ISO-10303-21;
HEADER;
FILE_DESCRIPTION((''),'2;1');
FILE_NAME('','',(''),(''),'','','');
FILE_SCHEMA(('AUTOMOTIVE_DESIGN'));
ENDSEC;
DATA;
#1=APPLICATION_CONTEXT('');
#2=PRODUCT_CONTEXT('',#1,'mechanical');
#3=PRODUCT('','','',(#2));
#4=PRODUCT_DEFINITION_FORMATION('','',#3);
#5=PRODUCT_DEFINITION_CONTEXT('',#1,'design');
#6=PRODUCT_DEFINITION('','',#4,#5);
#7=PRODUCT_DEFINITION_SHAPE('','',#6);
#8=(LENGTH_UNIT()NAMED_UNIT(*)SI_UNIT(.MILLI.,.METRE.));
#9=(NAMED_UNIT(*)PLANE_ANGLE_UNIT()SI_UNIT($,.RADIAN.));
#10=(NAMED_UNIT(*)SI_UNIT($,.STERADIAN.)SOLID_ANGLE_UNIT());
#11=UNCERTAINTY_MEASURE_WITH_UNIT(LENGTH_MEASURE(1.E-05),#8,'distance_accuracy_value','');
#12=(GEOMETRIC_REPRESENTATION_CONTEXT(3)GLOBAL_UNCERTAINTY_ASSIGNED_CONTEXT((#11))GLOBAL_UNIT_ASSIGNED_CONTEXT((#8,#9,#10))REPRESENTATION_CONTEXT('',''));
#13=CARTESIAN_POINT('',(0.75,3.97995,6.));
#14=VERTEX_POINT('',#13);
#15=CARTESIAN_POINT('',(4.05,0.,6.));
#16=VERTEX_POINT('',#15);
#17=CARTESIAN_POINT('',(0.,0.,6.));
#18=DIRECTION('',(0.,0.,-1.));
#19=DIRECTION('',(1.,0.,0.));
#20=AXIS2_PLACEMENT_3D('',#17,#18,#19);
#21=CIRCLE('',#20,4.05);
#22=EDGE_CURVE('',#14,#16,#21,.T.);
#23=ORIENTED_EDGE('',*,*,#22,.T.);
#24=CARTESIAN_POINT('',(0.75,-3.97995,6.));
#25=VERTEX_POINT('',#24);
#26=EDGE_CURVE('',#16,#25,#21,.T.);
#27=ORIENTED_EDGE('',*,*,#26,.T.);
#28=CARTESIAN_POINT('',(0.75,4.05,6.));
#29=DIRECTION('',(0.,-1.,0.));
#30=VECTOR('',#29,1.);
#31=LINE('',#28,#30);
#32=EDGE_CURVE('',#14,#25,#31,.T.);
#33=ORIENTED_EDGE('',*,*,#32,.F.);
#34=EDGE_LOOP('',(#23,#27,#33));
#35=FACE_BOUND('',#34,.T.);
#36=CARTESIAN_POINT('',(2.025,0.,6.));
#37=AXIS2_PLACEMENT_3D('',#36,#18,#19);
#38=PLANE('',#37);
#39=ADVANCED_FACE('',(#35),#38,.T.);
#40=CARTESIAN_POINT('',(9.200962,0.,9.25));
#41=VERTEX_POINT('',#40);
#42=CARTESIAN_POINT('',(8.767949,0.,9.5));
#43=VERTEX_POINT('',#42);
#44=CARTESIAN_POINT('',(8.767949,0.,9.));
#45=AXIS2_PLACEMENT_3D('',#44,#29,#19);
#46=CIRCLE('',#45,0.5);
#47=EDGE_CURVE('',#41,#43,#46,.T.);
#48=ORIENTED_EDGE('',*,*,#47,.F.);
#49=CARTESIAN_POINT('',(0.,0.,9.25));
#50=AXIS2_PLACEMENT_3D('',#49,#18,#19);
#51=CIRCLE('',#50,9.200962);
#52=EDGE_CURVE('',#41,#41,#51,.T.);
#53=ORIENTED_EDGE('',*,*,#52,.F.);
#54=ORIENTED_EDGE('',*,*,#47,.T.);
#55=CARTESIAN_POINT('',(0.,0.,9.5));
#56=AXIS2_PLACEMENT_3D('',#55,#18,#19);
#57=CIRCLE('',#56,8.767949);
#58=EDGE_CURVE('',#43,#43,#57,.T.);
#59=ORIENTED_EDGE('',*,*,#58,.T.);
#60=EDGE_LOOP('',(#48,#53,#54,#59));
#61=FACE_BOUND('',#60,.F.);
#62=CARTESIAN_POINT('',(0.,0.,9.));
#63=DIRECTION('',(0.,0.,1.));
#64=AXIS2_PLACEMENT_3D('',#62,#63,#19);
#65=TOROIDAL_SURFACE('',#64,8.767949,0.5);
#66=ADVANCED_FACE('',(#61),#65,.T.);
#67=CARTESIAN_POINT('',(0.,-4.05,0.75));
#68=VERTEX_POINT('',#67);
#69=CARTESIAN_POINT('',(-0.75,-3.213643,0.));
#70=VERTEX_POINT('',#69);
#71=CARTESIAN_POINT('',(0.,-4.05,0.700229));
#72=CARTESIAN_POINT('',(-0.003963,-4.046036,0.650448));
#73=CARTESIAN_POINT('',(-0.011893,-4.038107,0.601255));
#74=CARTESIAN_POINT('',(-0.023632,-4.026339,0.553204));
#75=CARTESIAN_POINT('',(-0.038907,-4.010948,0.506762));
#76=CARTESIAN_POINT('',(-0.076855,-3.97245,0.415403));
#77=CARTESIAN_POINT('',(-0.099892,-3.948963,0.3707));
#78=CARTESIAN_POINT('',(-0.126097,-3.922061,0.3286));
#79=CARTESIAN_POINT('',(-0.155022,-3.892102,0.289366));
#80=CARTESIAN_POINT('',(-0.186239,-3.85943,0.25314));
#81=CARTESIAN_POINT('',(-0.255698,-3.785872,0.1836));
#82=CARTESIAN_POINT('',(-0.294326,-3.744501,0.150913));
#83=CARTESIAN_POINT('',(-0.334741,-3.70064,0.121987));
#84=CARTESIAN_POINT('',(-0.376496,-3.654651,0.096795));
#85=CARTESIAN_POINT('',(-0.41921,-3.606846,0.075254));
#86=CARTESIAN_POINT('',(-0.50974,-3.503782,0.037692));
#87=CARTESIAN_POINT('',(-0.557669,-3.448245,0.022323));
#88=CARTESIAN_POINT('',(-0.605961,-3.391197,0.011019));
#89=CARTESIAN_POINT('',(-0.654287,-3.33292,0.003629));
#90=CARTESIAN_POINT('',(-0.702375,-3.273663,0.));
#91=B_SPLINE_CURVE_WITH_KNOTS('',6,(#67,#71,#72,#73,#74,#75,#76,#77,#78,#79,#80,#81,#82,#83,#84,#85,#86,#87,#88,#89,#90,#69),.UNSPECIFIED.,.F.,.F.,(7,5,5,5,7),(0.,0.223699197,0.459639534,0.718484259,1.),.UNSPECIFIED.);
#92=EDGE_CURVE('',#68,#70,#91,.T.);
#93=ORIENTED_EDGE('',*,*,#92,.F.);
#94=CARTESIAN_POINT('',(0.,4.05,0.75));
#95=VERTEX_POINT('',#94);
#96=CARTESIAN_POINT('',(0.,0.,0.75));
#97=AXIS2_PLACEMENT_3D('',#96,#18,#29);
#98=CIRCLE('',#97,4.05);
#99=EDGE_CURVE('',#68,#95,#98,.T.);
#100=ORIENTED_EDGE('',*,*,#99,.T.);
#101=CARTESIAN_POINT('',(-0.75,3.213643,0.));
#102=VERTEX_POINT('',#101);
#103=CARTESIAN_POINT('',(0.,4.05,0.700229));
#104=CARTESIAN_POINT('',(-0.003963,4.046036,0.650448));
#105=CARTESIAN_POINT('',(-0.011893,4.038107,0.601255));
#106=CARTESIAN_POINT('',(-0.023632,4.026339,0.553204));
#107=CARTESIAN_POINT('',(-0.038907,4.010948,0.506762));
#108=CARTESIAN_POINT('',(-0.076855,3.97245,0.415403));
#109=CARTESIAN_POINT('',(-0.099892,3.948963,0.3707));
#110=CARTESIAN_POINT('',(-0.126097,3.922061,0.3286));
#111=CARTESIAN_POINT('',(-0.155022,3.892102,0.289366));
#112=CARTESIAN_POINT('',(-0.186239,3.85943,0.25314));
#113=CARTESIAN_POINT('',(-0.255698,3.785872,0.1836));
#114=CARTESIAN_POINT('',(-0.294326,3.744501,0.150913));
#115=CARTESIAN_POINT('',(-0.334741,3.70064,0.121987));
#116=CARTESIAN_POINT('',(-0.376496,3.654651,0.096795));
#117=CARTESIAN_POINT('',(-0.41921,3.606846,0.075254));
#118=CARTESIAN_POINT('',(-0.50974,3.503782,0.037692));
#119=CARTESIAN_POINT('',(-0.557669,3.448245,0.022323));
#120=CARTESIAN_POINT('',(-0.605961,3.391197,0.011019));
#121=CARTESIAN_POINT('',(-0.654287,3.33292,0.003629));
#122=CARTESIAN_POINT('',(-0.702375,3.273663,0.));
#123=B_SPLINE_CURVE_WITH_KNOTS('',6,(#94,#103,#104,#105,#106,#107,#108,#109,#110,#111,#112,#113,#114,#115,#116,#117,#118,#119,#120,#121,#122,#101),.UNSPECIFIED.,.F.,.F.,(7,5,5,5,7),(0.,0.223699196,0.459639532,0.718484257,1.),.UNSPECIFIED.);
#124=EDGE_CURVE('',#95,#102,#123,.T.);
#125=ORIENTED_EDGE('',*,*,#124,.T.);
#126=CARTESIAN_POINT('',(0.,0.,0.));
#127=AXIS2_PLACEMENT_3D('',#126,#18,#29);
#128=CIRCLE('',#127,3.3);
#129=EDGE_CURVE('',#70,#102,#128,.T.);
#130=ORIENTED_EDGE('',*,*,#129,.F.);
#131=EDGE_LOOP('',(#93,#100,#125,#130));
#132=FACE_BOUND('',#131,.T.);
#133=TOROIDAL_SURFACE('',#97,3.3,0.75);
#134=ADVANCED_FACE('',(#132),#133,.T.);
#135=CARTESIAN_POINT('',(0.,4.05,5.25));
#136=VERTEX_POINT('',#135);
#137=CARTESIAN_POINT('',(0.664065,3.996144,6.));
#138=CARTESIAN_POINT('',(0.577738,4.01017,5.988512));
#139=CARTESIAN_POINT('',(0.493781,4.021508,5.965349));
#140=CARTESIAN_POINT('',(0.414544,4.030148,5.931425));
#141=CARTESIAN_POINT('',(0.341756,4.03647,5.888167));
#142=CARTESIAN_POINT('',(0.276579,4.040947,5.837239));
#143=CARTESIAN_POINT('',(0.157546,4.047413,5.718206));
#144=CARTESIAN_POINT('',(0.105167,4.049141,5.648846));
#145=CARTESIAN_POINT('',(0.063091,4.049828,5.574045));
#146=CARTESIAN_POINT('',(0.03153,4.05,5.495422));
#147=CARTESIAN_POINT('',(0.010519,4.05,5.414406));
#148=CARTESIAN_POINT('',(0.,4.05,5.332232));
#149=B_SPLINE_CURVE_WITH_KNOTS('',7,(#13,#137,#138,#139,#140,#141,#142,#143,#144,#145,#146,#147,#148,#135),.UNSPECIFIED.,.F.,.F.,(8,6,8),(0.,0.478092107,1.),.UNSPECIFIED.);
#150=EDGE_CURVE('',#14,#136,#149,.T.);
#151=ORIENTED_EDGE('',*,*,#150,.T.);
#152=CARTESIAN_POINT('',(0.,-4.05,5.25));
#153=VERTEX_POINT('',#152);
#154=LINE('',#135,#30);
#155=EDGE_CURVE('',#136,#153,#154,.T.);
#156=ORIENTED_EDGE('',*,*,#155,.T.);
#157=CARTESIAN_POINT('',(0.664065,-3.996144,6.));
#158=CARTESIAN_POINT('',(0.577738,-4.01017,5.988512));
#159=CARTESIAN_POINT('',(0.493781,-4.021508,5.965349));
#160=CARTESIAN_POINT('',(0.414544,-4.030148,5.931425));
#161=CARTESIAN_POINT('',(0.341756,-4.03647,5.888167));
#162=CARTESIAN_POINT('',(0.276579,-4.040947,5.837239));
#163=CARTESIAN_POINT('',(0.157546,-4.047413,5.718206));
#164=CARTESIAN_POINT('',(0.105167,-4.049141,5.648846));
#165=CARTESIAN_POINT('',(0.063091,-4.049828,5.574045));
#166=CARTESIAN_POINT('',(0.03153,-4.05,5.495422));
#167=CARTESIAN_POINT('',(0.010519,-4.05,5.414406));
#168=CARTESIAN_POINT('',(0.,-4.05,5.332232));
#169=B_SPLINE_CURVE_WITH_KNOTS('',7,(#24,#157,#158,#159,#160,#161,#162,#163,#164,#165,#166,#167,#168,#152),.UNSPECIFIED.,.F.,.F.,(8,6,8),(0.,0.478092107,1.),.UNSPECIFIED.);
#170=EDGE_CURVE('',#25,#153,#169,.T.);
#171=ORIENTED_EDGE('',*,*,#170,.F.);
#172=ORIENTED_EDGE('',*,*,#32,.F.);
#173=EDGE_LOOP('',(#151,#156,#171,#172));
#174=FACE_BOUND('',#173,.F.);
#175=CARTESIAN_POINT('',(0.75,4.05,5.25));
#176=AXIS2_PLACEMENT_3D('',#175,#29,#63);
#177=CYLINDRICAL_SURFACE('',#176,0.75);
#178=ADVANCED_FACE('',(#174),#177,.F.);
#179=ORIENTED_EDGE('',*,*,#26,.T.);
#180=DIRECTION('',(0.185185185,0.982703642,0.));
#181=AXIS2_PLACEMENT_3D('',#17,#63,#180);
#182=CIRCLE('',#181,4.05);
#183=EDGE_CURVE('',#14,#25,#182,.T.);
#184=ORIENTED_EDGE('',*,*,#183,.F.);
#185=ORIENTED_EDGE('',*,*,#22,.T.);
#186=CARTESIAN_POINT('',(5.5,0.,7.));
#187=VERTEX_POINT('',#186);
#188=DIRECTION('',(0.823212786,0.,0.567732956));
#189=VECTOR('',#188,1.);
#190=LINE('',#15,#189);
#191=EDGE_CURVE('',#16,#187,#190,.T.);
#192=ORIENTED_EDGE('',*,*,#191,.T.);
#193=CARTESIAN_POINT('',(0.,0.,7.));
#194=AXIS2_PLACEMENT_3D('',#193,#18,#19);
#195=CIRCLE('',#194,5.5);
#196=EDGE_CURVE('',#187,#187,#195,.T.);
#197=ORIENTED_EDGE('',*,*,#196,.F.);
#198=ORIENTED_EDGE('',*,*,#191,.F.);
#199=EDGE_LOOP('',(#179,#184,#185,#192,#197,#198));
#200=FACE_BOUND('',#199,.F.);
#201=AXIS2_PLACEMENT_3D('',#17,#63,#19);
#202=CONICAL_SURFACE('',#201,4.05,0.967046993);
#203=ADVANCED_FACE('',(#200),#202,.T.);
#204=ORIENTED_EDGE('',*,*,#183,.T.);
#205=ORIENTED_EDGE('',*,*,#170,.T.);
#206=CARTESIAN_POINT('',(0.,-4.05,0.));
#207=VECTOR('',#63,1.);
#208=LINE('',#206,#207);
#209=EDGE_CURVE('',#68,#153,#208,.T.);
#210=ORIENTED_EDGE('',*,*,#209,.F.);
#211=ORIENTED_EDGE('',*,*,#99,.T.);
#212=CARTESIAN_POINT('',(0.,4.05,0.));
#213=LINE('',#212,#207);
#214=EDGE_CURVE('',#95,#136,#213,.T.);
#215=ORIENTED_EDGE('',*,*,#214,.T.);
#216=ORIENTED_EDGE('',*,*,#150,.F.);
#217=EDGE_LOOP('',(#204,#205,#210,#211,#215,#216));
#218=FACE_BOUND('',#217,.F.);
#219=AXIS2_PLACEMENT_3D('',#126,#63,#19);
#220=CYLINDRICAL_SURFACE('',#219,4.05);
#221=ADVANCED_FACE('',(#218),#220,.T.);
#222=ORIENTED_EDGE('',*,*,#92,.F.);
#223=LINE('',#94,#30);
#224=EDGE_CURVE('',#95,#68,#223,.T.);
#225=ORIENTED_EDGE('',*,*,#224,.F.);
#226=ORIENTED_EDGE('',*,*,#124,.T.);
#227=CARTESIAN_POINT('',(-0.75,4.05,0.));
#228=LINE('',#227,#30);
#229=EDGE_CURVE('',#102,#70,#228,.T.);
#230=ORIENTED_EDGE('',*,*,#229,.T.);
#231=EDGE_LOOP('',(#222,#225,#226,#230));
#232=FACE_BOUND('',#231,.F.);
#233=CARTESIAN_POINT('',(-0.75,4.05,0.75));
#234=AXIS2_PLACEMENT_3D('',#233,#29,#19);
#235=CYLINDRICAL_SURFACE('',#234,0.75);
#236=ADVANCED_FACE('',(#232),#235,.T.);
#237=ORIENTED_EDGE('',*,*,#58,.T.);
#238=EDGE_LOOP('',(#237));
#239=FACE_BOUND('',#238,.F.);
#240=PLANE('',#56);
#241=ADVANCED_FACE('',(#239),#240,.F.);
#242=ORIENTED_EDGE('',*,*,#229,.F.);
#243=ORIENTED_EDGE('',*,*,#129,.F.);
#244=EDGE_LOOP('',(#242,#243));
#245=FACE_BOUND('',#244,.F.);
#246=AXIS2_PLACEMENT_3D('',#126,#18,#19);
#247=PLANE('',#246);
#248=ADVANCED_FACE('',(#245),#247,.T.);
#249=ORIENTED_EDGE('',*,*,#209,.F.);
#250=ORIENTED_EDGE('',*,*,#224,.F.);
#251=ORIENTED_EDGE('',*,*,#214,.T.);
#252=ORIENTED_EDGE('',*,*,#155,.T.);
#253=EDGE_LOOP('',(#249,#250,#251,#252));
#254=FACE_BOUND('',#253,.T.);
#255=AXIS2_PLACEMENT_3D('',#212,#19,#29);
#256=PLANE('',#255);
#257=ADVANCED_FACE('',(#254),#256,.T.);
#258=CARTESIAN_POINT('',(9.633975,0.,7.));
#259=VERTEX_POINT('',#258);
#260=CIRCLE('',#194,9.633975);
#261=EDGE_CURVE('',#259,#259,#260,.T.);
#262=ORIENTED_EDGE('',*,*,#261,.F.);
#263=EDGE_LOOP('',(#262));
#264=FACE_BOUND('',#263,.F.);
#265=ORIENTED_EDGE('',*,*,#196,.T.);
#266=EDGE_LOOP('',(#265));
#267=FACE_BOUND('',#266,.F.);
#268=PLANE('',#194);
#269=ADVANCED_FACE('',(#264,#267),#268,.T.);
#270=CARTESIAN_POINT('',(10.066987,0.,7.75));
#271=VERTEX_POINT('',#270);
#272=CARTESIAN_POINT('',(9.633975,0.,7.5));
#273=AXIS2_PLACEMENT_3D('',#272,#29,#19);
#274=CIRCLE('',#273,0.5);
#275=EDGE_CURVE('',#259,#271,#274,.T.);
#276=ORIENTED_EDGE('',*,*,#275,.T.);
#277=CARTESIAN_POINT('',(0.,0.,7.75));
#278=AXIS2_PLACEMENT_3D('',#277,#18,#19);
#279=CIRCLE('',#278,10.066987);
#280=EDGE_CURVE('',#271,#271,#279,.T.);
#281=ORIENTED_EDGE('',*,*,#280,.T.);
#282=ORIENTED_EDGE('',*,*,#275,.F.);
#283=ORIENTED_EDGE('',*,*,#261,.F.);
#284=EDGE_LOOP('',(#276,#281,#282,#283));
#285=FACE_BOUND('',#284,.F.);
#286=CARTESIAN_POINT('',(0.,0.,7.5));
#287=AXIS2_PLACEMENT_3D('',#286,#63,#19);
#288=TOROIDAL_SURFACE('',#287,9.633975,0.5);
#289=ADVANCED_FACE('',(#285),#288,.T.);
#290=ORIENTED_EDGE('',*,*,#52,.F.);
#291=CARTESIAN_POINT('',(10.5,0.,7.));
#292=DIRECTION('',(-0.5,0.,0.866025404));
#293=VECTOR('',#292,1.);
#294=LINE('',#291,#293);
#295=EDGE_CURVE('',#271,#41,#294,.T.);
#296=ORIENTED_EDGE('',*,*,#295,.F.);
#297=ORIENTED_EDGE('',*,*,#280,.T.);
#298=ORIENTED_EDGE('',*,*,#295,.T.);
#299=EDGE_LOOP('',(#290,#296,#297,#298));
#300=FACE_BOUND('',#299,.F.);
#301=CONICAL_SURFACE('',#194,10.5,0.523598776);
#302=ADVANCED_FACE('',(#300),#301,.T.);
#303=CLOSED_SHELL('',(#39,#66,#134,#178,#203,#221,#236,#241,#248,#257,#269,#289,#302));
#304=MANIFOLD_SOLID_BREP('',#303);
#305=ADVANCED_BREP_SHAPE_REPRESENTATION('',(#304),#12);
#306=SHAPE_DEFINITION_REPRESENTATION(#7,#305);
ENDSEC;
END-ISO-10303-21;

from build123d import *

# Parameters (mm, degrees)
F2_W     = 4.05
F2_H     = 8.1
F3_DEPTH = 6
F4_R     = 0.75
F5_R     = 0.5


with BuildPart() as f1:
    # F0 (on Front) → F1 (revolve)
    with BuildSketch(Plane.XZ):
        Polygon((4.05, 0), (4.05, 6), (5.5, 7), (10.5, 7), (9.056624327, 9.5), (0, 9.5), (0, 0), align=None)
    revolve(axis=Axis((0, 0, 4.75), (0, 0, -1)))

    # F2 (on face) → F3 (cut)
    with BuildSketch(Plane(origin=(0, 0, 0), x_dir=(1, 0, 0), z_dir=(0, 0, -1))):
        with Locations((2.025, 0)):
            Rectangle(F2_W, F2_H)
    extrude(amount=-F3_DEPTH, mode=Mode.SUBTRACT)

    # F4
    f4_edges = [f1.edges().sort_by_distance(p)[0] for p in [
        (0, 0, 0),
        (0, 0, 6),
        (-4.05, 0, 0),
    ]]
    fillet(f4_edges, radius=F4_R)

    # F5
    f5_edges = [f1.edges().sort_by_distance(p)[0] for p in [
        (-9.056624, 0, 9.5),
        (-10.5, 0, 7),
    ]]
    fillet(f5_edges, radius=F5_R)


solid = f1.part
